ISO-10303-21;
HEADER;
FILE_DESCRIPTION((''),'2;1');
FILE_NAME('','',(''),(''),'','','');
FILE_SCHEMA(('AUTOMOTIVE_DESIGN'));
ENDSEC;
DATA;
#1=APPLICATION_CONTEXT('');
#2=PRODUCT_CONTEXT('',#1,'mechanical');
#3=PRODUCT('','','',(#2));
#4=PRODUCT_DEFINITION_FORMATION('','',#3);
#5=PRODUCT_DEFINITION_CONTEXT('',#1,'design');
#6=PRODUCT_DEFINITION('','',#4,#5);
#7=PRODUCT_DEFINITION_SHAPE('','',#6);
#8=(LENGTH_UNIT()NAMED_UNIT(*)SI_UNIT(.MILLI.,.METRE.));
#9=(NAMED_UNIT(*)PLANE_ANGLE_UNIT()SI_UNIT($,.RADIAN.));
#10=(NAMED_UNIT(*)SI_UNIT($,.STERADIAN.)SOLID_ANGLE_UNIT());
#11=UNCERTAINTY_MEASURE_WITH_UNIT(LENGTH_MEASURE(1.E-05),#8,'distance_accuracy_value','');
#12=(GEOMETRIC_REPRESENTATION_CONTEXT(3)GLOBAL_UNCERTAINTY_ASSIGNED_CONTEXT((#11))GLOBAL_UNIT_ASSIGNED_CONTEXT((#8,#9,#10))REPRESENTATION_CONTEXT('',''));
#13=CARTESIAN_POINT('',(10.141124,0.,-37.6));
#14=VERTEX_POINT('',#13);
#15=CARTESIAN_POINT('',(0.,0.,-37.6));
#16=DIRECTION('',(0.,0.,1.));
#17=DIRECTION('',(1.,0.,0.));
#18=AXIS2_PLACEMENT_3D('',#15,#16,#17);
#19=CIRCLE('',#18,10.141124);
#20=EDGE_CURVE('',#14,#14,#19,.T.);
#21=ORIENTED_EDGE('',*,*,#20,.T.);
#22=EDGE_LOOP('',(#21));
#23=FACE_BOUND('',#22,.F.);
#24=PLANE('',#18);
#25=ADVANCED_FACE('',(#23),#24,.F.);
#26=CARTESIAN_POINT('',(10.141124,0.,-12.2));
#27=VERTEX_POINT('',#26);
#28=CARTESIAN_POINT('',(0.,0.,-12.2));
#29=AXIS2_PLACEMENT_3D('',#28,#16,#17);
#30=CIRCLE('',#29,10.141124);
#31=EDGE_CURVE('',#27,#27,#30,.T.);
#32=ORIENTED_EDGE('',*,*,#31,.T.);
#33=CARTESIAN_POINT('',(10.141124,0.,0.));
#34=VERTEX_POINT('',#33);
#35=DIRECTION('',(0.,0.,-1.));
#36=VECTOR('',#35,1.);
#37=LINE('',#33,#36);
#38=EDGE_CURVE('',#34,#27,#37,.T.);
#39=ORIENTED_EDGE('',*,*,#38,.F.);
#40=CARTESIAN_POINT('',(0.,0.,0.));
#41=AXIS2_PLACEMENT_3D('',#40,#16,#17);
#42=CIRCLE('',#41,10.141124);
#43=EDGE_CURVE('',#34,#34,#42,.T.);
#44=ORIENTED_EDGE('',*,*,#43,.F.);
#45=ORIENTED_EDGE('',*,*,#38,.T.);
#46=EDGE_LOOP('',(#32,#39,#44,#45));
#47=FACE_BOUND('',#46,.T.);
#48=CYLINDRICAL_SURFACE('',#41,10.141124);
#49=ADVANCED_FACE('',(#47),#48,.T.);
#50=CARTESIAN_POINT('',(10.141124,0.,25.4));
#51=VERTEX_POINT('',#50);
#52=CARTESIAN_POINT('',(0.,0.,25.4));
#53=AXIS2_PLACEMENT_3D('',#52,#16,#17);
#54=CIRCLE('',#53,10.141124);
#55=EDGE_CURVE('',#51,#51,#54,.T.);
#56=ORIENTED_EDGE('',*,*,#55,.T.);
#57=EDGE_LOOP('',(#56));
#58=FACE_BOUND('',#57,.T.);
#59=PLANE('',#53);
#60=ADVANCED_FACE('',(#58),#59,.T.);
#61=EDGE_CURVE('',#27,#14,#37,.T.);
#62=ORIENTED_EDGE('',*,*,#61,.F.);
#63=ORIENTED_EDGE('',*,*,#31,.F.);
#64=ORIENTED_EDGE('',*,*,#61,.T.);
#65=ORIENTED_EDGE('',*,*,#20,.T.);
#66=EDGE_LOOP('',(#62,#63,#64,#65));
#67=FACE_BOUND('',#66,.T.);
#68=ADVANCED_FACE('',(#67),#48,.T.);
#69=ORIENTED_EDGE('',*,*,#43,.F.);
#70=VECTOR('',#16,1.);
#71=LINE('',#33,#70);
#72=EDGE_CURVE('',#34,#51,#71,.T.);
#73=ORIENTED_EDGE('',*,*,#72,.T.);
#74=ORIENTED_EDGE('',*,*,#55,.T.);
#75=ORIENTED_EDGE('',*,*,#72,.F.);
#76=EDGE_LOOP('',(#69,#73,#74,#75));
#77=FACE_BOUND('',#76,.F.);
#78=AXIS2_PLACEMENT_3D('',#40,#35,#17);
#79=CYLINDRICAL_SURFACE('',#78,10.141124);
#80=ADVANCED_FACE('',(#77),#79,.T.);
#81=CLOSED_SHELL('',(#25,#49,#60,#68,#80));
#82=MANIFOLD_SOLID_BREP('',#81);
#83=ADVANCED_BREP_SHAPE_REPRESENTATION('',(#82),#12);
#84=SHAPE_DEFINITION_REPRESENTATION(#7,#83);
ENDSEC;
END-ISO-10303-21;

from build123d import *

# Parameters (mm, degrees)
F0_R      = 10.1411241646
F1_DEPTH  = 25.4
F1_FACE_R = 10.1411241646
F2_DEPTH  = 37.6


# Not quite as in the source:
# - a feature names something its author has since deleted; it is built from what else it names


with BuildPart() as f1:
    # F0 (on Top) → F1 (new body)
    with BuildSketch(Plane.XY):
        Circle(F0_R)
    extrude(amount=F1_DEPTH)

    # F0 (on Top) + F1_face (on face) → F2 (join)
    with BuildSketch(Plane.XY):
        Circle(F0_R)
    with BuildSketch(Plane.XY.offset(25.4)):
        Circle(F1_FACE_R)
    extrude(amount=-F2_DEPTH)


solid = f1.part
